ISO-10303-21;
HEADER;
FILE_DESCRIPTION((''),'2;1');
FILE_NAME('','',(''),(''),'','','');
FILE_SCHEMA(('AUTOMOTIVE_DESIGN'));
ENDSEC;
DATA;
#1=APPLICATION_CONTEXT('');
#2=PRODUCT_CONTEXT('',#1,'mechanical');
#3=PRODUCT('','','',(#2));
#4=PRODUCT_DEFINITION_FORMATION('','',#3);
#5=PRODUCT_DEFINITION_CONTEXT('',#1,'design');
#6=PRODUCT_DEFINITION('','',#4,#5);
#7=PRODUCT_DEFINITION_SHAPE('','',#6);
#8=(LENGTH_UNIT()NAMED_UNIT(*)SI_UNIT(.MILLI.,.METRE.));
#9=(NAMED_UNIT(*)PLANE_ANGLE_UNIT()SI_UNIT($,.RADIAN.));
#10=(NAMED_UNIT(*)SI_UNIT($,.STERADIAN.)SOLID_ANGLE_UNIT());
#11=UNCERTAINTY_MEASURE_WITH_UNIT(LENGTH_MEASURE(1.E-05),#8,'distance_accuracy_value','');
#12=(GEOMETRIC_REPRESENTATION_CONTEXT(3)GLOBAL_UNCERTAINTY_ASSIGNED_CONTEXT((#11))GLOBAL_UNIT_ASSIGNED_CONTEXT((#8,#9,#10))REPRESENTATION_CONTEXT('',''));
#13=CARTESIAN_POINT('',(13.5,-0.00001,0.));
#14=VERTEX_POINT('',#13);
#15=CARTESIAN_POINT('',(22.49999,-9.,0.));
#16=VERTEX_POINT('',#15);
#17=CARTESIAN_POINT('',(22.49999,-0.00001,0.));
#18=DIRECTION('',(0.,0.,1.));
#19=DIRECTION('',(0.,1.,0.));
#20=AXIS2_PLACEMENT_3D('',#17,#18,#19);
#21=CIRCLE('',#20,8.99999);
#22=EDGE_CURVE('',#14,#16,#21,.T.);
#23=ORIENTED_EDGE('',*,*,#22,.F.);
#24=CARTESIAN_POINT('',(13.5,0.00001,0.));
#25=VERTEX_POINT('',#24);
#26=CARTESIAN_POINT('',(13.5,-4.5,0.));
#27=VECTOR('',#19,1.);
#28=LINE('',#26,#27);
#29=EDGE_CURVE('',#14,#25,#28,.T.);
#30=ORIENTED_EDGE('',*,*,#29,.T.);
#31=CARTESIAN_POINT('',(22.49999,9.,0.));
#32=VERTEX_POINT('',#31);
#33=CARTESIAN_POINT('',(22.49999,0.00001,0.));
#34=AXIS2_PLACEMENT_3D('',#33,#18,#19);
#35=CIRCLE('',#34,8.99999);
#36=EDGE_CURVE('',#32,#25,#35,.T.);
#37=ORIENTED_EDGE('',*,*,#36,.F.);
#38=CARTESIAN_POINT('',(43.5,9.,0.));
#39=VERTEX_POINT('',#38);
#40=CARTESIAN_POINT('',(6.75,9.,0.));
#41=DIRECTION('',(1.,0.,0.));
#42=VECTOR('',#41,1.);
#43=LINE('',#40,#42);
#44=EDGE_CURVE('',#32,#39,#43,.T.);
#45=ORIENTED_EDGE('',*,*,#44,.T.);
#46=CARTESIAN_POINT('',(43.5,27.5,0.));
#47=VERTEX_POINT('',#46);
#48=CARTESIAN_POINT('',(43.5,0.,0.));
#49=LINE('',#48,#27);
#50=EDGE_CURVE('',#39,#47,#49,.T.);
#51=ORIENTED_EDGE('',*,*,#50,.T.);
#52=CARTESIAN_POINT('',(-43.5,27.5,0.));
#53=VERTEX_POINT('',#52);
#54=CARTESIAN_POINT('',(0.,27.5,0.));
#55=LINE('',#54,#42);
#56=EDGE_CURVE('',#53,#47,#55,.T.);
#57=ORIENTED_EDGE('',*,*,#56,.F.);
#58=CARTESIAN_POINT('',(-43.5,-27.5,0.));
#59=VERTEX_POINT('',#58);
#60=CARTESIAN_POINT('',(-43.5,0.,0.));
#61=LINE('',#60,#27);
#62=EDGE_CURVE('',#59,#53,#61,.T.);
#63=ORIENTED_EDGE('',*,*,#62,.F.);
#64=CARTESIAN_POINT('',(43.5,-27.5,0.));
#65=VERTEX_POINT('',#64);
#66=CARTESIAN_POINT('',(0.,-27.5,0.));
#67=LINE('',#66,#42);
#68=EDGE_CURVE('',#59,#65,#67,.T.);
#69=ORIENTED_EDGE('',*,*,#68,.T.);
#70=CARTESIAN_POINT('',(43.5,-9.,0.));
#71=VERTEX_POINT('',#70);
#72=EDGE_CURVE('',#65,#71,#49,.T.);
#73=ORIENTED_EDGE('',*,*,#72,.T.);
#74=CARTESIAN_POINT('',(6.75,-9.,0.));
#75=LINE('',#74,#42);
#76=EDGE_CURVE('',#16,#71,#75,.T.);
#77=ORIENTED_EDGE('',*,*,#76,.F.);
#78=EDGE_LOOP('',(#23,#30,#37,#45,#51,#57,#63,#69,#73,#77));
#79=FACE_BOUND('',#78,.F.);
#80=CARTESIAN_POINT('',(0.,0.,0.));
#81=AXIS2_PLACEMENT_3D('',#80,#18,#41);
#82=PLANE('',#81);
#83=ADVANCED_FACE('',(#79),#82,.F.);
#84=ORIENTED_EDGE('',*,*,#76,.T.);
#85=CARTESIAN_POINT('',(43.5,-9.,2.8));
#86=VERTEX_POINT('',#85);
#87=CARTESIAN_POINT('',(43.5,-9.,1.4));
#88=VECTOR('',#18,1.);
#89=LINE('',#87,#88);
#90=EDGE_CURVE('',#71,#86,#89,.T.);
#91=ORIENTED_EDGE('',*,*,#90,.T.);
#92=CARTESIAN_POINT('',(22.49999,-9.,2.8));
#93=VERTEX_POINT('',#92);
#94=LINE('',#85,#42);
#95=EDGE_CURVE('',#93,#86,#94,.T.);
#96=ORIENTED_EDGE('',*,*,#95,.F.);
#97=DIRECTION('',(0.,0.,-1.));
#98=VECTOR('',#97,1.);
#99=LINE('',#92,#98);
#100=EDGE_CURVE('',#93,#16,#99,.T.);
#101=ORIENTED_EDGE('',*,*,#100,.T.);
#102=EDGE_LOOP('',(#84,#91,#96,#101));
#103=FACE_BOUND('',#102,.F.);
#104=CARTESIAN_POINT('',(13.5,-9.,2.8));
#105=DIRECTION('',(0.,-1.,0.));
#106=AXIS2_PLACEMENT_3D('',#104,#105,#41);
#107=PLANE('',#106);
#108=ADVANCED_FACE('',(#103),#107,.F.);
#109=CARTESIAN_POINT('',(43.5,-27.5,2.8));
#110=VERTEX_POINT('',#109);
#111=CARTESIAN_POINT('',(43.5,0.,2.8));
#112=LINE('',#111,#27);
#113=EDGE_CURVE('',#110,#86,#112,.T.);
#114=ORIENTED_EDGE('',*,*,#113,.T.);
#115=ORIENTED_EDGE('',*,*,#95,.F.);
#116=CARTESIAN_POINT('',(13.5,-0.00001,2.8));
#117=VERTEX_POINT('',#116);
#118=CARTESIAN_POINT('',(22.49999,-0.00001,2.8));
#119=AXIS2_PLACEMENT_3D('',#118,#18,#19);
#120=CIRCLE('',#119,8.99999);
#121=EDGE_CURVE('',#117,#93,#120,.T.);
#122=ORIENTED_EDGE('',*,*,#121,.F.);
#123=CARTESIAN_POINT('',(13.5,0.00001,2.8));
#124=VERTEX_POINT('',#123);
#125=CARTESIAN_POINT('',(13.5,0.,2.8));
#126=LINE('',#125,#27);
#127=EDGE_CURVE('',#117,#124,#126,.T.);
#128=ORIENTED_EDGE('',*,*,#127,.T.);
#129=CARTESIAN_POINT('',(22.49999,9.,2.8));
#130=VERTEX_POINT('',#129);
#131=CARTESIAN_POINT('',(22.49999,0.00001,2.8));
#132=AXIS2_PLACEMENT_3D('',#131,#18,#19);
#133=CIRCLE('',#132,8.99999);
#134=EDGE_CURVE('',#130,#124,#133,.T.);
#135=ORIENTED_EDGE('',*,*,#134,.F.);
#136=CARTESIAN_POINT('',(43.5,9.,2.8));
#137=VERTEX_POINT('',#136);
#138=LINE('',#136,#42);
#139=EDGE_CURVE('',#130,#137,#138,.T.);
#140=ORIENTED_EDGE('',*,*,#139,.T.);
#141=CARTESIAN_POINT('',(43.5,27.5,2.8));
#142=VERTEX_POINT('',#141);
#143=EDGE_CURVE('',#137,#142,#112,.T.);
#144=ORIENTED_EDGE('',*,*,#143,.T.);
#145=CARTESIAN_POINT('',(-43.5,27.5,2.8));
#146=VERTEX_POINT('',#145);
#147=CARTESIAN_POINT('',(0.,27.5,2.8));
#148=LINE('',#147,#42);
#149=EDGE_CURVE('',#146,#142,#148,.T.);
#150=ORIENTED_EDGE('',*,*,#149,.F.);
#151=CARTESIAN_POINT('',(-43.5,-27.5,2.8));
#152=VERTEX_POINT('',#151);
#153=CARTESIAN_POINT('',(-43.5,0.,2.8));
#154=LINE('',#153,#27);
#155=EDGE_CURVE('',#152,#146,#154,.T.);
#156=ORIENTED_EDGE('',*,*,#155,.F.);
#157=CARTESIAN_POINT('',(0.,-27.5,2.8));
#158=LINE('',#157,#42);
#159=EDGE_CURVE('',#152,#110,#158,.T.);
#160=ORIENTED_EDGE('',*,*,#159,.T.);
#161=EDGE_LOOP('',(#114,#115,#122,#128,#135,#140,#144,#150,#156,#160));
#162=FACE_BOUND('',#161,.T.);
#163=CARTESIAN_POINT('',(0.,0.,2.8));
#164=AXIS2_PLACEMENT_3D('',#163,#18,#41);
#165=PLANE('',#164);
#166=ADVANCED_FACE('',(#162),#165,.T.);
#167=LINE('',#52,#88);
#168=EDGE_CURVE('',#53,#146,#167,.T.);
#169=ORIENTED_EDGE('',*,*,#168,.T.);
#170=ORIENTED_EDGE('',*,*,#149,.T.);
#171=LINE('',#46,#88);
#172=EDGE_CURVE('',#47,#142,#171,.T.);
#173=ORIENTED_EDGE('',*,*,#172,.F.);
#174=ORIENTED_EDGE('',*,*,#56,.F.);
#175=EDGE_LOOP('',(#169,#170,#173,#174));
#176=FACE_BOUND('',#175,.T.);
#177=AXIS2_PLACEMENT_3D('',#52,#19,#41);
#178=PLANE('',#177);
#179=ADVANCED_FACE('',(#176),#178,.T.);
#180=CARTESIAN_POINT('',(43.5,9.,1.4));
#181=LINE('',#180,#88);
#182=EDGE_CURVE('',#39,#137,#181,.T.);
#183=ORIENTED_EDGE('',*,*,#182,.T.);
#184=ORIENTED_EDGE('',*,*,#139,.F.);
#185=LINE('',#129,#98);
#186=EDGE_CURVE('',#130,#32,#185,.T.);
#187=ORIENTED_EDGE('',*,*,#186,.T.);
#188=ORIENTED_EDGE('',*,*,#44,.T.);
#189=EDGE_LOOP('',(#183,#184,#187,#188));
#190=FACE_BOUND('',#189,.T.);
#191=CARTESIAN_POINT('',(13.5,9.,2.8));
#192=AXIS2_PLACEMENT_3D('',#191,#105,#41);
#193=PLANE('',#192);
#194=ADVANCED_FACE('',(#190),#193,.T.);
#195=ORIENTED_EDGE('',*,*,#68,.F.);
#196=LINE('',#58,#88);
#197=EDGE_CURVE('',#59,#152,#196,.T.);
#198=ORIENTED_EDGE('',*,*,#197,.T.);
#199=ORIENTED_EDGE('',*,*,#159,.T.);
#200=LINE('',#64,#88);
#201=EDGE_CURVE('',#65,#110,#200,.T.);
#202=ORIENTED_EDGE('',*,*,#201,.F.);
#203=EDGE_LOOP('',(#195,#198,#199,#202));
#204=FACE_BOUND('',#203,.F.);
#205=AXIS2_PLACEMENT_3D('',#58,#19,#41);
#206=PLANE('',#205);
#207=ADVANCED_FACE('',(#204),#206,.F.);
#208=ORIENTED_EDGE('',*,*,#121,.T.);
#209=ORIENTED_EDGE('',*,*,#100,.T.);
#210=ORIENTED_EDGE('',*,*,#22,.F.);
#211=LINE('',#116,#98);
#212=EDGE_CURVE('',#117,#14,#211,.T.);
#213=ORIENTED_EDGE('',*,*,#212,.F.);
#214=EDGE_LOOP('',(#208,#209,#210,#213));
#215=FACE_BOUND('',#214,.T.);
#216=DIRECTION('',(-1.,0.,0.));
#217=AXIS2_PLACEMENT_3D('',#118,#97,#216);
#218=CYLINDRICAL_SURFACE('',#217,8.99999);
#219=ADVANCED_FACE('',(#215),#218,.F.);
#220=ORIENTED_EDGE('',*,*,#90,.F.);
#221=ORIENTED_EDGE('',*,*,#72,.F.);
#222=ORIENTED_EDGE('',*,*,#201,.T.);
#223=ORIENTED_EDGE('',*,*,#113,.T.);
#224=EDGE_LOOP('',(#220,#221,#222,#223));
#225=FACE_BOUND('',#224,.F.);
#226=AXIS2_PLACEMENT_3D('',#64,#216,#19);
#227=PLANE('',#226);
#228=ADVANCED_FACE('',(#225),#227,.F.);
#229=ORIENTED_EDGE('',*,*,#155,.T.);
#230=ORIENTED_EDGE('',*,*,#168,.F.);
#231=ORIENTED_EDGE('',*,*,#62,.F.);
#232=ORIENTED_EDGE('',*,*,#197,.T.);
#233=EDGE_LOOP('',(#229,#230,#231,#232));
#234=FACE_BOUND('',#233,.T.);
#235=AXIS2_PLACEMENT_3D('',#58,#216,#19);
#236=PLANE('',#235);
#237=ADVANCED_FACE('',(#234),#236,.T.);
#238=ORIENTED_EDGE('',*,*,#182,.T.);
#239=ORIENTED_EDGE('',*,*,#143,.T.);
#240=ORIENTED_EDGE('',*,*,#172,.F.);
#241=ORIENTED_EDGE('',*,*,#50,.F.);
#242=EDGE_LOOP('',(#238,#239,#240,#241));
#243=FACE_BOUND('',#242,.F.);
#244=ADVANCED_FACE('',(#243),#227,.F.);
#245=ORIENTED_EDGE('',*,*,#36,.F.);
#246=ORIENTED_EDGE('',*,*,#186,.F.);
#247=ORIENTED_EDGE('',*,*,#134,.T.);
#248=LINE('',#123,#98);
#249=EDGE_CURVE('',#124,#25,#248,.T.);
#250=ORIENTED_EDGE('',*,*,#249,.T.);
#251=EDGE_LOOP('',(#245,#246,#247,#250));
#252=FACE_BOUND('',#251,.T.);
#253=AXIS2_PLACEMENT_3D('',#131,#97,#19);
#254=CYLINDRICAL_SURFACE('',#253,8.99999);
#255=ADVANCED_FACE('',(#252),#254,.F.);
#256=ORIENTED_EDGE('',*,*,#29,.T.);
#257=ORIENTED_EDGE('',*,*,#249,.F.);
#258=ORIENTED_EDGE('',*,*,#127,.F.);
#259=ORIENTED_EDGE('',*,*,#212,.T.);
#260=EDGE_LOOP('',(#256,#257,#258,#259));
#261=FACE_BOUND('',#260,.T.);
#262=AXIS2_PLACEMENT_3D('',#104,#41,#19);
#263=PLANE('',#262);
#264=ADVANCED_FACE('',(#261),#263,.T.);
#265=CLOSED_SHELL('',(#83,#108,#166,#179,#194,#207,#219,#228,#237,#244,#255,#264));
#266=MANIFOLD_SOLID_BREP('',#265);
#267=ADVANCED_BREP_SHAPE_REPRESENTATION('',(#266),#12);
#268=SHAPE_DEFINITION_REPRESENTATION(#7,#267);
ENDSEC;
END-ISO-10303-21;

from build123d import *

# Parameters (mm, degrees)
F0_W     = 87
F0_H     = 55
F1_DEPTH = 2.8
F2_W     = 60
F2_H     = 18
F3_DEPTH = 25
F4_R     = 8.99999


# Not quite as in the source:
# - a fillet or chamfer is up to 0.001 mm smaller than in the source, because OpenCascade refuses the exact size


with BuildPart() as f1:
    # F0 (on Top) → F1 (new body)
    with BuildSketch(Plane.XY):
        Rectangle(F0_W, F0_H)
    extrude(amount=F1_DEPTH)

    # F2 (on face) → F3 (cut)
    with BuildSketch(Plane.XY.offset(2.8)):
        with Locations((43.5, 0)):
            Rectangle(F2_W, F2_H)
    extrude(amount=-F3_DEPTH, mode=Mode.SUBTRACT)

    # F4 (radius 9 in the source; OpenCascade refuses exactly that, so slightly less here)
    f4_edges = [f1.edges().sort_by_distance(p)[0] for p in [
        (13.5, 9, 1.4),
        (13.5, -9, 1.4),
    ]]
    fillet(f4_edges, radius=F4_R)


solid = f1.part
